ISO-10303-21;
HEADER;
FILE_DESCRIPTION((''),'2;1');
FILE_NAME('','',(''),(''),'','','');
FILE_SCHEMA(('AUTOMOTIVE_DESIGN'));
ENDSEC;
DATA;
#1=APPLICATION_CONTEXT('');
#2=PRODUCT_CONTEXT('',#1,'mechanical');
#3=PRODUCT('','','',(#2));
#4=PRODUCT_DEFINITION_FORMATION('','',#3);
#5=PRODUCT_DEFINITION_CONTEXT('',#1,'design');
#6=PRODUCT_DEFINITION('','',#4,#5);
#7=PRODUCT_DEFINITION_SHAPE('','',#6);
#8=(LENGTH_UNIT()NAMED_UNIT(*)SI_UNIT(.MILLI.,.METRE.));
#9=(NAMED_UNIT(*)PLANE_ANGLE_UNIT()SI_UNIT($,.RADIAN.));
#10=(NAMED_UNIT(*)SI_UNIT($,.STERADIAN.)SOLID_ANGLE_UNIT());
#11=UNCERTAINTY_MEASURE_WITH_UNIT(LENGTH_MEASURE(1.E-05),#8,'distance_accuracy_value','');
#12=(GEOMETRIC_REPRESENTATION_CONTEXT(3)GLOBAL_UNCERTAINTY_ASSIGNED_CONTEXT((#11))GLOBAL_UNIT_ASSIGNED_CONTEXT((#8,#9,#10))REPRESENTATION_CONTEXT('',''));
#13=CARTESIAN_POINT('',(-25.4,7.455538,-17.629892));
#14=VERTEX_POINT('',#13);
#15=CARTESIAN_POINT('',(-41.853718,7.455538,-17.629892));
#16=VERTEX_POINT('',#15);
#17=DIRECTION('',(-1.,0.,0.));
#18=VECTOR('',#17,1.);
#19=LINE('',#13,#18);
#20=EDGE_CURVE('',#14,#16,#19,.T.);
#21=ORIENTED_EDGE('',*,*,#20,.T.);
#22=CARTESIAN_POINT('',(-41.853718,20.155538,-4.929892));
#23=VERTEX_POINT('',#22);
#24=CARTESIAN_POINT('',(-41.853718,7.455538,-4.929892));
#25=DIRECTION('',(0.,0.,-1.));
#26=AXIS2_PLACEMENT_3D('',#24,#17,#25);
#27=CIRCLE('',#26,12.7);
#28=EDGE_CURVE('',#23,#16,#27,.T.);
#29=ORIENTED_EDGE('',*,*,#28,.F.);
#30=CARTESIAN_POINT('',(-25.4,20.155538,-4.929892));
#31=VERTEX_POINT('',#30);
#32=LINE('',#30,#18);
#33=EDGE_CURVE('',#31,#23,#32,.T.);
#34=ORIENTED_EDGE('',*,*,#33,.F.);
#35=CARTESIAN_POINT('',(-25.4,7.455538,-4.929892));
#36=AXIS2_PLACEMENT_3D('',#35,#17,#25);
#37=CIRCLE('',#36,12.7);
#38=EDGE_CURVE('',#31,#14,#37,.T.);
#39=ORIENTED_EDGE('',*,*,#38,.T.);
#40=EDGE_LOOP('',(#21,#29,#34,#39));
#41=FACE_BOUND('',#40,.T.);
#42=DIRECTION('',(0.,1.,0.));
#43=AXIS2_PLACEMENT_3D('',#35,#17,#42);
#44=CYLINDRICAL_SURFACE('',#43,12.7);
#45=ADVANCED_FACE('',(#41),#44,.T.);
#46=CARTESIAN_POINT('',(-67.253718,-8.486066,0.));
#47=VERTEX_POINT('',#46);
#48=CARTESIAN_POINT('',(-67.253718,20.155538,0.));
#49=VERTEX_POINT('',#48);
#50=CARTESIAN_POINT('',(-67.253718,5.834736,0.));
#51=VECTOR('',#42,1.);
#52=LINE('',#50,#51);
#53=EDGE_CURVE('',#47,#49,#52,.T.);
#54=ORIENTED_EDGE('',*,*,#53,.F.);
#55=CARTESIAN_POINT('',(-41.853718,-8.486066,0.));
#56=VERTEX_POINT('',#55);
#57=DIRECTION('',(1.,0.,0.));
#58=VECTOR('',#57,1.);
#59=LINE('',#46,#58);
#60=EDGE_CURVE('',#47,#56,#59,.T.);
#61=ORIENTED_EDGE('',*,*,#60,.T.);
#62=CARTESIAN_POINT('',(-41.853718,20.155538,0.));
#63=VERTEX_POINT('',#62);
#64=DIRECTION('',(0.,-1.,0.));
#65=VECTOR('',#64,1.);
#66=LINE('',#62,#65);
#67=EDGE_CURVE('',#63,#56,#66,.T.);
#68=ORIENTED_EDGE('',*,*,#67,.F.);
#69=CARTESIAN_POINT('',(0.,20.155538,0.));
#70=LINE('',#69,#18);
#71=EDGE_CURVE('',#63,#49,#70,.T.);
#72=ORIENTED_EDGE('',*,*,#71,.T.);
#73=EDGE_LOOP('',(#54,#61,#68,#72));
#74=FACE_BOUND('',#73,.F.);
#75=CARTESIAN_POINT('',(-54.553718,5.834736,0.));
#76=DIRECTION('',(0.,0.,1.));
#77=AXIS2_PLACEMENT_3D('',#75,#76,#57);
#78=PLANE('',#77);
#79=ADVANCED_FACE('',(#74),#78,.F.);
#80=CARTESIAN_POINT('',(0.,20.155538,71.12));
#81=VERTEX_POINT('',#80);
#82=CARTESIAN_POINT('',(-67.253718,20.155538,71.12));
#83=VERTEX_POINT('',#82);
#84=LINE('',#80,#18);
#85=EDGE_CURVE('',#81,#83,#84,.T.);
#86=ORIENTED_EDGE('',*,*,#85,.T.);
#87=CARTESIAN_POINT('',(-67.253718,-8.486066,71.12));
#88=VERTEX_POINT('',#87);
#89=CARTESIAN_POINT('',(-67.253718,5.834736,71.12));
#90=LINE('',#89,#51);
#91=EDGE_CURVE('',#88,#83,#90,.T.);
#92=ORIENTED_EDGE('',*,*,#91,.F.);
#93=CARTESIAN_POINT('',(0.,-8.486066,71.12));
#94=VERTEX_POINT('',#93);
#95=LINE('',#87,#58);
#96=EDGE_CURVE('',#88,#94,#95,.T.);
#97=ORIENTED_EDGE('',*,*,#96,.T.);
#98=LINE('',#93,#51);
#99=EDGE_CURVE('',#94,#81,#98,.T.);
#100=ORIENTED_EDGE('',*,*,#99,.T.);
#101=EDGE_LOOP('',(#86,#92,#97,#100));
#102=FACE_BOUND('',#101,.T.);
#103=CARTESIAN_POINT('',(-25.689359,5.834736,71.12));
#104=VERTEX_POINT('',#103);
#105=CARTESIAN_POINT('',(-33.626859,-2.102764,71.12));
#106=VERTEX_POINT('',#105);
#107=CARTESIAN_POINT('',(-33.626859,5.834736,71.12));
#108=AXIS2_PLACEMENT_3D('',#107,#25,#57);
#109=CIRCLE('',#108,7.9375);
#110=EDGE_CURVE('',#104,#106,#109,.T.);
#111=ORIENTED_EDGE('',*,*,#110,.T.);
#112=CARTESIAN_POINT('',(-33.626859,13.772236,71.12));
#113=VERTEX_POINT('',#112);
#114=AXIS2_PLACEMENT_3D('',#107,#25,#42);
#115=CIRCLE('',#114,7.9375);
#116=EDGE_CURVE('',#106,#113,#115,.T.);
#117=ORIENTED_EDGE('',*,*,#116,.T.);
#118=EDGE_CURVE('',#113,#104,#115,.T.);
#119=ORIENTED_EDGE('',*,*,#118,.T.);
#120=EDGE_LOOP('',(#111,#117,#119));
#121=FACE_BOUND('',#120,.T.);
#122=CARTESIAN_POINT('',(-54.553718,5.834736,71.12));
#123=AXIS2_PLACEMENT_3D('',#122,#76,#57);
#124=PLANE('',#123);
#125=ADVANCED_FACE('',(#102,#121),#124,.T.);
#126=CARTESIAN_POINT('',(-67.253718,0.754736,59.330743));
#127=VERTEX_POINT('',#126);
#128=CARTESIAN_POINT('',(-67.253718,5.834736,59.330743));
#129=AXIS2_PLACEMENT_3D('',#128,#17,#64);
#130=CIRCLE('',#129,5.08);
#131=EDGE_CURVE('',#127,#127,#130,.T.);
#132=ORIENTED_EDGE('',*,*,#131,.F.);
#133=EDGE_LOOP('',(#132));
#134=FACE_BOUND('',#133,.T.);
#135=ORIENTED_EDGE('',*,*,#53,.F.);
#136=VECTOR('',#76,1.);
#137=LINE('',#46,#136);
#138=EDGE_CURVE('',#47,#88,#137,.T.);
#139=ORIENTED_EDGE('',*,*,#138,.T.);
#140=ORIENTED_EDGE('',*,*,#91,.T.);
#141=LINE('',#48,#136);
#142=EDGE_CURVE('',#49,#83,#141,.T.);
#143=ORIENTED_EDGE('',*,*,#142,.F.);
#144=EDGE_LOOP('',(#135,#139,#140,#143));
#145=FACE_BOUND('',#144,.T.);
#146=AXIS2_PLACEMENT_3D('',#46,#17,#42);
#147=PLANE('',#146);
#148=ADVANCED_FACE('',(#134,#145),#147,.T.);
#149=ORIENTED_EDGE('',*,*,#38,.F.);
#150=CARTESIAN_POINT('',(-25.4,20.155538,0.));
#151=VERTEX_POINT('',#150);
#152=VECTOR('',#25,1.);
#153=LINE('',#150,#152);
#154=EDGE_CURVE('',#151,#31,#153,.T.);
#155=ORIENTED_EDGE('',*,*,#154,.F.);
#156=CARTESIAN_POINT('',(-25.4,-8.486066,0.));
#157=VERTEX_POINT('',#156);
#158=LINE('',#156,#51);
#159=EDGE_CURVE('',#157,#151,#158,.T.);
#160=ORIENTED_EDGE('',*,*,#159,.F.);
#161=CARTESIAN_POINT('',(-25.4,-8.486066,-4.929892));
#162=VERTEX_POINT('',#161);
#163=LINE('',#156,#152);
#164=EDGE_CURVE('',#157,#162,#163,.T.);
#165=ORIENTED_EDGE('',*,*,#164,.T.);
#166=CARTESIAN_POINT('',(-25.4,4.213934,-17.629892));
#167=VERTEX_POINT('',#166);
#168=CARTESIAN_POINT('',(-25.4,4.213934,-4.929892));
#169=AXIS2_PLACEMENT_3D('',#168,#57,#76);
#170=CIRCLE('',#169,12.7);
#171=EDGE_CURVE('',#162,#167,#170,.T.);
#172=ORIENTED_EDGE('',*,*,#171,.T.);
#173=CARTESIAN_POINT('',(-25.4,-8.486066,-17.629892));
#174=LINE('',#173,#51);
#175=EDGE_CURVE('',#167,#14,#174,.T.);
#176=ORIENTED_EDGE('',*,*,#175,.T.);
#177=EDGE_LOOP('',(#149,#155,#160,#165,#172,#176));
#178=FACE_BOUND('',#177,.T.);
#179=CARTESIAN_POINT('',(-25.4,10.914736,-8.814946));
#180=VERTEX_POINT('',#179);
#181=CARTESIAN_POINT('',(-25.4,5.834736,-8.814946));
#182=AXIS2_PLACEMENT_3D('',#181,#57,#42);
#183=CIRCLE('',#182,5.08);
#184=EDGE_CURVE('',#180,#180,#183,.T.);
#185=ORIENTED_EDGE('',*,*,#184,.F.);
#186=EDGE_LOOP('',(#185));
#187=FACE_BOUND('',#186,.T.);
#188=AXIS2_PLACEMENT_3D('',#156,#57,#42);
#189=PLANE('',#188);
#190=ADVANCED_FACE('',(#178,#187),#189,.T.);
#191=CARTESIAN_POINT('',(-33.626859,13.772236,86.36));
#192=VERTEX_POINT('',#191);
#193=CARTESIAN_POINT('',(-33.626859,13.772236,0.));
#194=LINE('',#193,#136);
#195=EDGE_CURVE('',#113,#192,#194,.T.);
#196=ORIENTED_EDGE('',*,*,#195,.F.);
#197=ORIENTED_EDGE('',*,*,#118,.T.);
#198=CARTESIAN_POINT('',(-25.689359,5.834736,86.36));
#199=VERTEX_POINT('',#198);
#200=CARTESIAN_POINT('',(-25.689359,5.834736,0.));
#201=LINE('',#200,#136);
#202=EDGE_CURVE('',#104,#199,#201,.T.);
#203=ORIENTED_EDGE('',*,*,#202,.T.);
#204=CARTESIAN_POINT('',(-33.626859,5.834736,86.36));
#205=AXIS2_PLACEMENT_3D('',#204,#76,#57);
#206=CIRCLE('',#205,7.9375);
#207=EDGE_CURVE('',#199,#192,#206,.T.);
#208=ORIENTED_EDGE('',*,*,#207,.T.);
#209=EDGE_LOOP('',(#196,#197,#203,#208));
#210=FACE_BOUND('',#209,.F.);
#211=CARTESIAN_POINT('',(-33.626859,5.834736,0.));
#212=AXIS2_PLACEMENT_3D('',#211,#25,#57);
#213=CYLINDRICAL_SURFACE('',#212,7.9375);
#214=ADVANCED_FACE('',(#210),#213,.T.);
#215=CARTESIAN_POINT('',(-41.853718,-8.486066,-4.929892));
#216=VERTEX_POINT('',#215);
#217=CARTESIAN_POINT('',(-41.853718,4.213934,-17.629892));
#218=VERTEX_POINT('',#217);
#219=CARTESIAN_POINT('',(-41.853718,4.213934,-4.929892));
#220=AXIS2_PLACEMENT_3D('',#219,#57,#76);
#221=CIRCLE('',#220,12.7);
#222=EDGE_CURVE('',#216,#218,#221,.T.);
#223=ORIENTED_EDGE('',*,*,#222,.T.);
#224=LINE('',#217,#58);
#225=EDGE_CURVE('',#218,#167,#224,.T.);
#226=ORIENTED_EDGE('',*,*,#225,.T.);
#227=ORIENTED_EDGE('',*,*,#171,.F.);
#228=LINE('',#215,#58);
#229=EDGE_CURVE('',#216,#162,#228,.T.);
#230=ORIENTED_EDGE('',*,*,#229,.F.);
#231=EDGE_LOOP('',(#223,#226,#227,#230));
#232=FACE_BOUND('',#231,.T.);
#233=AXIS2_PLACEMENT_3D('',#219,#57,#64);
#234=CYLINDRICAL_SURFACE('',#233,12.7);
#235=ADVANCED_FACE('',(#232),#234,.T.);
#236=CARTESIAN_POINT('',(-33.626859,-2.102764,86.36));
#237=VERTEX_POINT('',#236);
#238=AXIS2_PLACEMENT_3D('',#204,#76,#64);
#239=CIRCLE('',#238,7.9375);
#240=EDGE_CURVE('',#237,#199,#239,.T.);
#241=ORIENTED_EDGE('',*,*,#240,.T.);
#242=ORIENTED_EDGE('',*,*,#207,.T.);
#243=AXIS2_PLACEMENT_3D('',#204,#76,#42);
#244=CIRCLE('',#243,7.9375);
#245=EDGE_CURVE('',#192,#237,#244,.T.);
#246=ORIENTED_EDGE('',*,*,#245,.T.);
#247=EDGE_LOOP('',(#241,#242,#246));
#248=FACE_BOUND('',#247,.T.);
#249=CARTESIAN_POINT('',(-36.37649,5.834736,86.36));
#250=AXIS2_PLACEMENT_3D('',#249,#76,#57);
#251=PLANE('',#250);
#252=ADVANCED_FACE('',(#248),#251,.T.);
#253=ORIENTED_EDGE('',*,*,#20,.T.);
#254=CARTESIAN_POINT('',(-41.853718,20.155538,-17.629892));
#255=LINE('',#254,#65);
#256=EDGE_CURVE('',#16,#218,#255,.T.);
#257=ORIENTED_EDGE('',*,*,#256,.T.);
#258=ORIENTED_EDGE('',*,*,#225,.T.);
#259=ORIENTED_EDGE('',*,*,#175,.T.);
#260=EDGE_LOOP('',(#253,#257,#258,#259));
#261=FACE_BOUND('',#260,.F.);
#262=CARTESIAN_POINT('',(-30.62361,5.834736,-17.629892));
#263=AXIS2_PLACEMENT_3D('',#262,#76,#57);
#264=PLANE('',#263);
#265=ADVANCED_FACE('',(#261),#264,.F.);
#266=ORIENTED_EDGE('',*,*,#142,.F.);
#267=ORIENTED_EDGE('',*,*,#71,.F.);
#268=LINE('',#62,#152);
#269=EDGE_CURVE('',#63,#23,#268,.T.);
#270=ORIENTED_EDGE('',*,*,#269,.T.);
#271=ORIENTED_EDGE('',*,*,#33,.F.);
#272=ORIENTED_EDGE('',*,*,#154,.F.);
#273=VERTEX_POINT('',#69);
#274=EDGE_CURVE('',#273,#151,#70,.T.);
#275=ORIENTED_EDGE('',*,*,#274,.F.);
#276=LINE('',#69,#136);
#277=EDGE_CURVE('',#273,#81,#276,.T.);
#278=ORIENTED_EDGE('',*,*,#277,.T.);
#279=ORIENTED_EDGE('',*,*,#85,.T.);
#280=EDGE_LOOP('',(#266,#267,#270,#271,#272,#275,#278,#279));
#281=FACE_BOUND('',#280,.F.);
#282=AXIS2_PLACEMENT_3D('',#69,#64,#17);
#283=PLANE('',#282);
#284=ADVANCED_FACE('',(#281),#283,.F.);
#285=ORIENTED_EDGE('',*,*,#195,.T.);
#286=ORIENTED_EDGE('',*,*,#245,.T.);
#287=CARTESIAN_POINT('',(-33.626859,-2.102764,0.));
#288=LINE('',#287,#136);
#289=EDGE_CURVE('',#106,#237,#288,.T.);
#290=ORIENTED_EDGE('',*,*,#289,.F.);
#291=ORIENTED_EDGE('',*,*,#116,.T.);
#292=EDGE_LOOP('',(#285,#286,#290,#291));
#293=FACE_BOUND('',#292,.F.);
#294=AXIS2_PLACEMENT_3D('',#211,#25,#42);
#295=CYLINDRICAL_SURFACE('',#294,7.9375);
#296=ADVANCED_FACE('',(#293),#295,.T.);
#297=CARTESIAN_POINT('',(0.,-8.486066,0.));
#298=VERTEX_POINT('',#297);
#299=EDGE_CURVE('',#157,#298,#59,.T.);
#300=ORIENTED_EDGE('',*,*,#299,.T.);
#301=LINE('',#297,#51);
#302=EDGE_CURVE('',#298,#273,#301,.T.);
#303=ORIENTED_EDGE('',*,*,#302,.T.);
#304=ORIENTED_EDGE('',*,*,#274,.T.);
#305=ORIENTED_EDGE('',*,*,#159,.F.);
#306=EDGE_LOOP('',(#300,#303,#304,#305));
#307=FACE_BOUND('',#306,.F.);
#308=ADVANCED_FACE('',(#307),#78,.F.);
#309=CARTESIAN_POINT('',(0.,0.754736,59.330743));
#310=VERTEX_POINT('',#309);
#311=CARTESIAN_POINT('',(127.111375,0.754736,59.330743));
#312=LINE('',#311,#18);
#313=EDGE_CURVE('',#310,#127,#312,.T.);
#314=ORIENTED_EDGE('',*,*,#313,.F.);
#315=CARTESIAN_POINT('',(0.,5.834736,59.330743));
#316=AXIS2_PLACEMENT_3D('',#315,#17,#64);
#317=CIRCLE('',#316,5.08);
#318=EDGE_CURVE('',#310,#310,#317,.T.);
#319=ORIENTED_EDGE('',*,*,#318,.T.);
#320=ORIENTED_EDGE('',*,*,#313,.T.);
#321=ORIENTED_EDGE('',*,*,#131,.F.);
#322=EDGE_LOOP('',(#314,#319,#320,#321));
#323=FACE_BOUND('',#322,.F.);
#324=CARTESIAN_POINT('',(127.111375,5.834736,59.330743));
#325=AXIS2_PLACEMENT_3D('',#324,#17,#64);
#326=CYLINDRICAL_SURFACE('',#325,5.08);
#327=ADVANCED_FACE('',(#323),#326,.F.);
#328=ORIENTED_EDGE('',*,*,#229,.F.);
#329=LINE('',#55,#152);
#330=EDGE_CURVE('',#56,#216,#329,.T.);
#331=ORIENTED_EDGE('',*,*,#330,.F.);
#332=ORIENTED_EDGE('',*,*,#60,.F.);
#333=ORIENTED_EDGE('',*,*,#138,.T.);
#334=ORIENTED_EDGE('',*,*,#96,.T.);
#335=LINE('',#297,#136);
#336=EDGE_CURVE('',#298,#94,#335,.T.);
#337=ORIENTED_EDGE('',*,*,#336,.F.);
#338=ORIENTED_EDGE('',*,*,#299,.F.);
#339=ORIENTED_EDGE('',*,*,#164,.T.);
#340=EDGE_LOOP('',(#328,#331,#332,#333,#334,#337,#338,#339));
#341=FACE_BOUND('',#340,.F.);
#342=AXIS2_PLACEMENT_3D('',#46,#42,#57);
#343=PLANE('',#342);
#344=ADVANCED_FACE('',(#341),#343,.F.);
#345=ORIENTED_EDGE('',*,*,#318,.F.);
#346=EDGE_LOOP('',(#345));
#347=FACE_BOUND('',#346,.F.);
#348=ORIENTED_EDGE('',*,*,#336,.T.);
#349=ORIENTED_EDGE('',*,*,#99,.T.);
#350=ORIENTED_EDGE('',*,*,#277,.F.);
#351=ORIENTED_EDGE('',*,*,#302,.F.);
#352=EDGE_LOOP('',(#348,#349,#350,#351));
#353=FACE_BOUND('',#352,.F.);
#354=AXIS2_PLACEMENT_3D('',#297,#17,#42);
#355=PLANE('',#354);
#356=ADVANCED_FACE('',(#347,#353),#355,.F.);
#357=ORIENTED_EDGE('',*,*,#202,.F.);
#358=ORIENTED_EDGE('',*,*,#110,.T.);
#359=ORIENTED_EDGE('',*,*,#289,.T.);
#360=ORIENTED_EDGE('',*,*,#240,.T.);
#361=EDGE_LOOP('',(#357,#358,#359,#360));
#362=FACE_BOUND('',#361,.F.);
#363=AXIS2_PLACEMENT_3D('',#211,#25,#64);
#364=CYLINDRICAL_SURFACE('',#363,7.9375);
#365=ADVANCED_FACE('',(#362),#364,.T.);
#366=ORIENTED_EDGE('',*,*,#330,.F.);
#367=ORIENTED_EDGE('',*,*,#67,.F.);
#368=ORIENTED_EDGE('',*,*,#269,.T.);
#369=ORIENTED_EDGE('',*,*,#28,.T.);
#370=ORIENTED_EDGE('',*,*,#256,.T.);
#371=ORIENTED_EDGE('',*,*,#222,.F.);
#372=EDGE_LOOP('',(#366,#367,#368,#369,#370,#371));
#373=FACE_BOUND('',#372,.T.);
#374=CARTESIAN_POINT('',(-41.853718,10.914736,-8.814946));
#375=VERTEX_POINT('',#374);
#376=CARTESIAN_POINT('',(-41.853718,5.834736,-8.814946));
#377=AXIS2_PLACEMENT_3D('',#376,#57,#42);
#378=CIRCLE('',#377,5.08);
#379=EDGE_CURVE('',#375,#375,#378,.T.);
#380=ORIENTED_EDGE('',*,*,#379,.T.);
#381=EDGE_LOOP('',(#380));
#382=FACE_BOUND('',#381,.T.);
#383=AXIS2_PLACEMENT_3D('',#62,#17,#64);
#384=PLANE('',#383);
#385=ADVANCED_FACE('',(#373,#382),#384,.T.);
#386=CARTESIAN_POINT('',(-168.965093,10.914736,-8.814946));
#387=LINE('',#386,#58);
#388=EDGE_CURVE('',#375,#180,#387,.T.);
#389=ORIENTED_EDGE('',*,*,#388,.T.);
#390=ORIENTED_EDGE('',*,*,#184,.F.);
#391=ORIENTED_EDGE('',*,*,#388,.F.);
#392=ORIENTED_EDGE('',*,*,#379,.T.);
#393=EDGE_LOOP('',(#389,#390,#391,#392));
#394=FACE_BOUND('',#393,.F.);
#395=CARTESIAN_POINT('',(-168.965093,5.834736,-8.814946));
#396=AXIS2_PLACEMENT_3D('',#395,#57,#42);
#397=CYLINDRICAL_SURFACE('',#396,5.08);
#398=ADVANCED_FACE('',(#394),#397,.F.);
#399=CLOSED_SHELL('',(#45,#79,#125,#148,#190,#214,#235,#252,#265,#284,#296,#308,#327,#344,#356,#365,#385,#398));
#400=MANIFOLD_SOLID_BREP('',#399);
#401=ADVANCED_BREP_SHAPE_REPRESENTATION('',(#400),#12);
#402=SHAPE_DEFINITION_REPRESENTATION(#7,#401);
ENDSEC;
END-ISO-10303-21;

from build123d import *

# Parameters (mm, degrees)
F0_W     = 25.4
F0_H     = 28.6416042886
F0_H_2   = 7.5187312844
F0_H_3   = 21.1228730042
F1_DEPTH = 71.12
F2_DEPTH = 86.36
F3_DEPTH = 17.629891634
F4_R     = 12.7
F6_D     = 10.16
F8_D     = 10.16


with BuildPart() as f1:
    # F0 (on Top) → F1 (new body)
    with BuildSketch(Plane.XY):
        with Locations((-54.5537182136, 5.834735956)):
            Rectangle(F0_W, F0_H)
        with BuildLine():
            Line((-33.6268591068, 20.1555381003), (-41.8537182136, 20.1555381003))
            Line((-41.8537182136, 20.1555381003), (-41.8537182136, -8.4860661883))
            Line((-41.8537182136, -8.4860661883), (-33.6268591068, -8.4860661883))
            Line((-33.6268591068, -8.4860661883), (-33.6268591068, -2.102764044))
            ThreePointArc((-33.6268591068, -2.102764044), (-41.5643591068, 5.834735956), (-33.6268591068, 13.772235956))
            Line((-33.6268591068, 13.772235956), (-33.6268591068, 20.1555381003))
        make_face()
        with BuildLine():
            Line((-25.4, 20.1555381003), (-33.6268591068, 20.1555381003))
            Line((-33.6268591068, 20.1555381003), (-33.6268591068, 13.772235956))
            ThreePointArc((-33.6268591068, 13.772235956), (-28.0141990311, 11.4473960317), (-25.6893591068, 5.834735956))
            ThreePointArc((-25.6893591068, 5.834735956), (-28.0141990311, 0.2220758803), (-33.6268591068, -2.102764044))
            Line((-33.6268591068, -2.102764044), (-33.6268591068, -8.4860661883))
            Line((-33.6268591068, -8.4860661883), (-25.4, -8.4860661883))
            Line((-25.4, -8.4860661883), (-25.4, 12.6368068159))
            Line((-25.4, 12.6368068159), (-25.4, 20.1555381003))
        make_face()
        with Locations((-12.7, 16.3961724581)):
            Rectangle(F0_W, F0_H_2)
        with BuildLine():
            Line((-33.6268591068, -2.102764044), (-33.6268591068, 13.772235956))
            ThreePointArc((-33.6268591068, 13.772235956), (-41.5643591068, 5.834735956), (-33.6268591068, -2.102764044))
        make_face()
        with Locations((-12.7, 2.0753703138)):
            Rectangle(F0_W, F0_H_3)
    extrude(amount=F1_DEPTH)

    # F0 (on Top) → F2 (join)
    with BuildSketch(Plane.XY):
        with BuildLine():
            Line((-33.6268591068, -2.102764044), (-33.6268591068, 13.772235956))
            ThreePointArc((-33.6268591068, 13.772235956), (-41.5643591068, 5.834735956), (-33.6268591068, -2.102764044))
        make_face()
        with BuildLine():
            ThreePointArc((-25.6893591068, 5.834735956), (-28.0141990311, 11.4473960317), (-33.6268591068, 13.772235956))
            Line((-33.6268591068, 13.772235956), (-33.6268591068, -2.102764044))
            ThreePointArc((-33.6268591068, -2.102764044), (-28.0141990311, 0.2220758803), (-25.6893591068, 5.834735956))
        make_face()
    extrude(amount=F2_DEPTH)

    # F0 (on Top) → F3 (join)
    with BuildSketch(Plane.XY):
        with BuildLine():
            ThreePointArc((-25.6893591068, 5.834735956), (-28.0141990311, 11.4473960317), (-33.6268591068, 13.772235956))
            Line((-33.6268591068, 13.772235956), (-33.6268591068, -2.102764044))
            ThreePointArc((-33.6268591068, -2.102764044), (-28.0141990311, 0.2220758803), (-25.6893591068, 5.834735956))
        make_face()
        with BuildLine():
            Line((-25.4, 20.1555381003), (-33.6268591068, 20.1555381003))
            Line((-33.6268591068, 20.1555381003), (-33.6268591068, 13.772235956))
            ThreePointArc((-33.6268591068, 13.772235956), (-28.0141990311, 11.4473960317), (-25.6893591068, 5.834735956))
            ThreePointArc((-25.6893591068, 5.834735956), (-28.0141990311, 0.2220758803), (-33.6268591068, -2.102764044))
            Line((-33.6268591068, -2.102764044), (-33.6268591068, -8.4860661883))
            Line((-33.6268591068, -8.4860661883), (-25.4, -8.4860661883))
            Line((-25.4, -8.4860661883), (-25.4, 12.6368068159))
            Line((-25.4, 12.6368068159), (-25.4, 20.1555381003))
        make_face()
        with BuildLine():
            Line((-33.6268591068, 20.1555381003), (-41.8537182136, 20.1555381003))
            Line((-41.8537182136, 20.1555381003), (-41.8537182136, -8.4860661883))
            Line((-41.8537182136, -8.4860661883), (-33.6268591068, -8.4860661883))
            Line((-33.6268591068, -8.4860661883), (-33.6268591068, -2.102764044))
            ThreePointArc((-33.6268591068, -2.102764044), (-41.5643591068, 5.834735956), (-33.6268591068, 13.772235956))
            Line((-33.6268591068, 13.772235956), (-33.6268591068, 20.1555381003))
        make_face()
        with BuildLine():
            Line((-33.6268591068, -2.102764044), (-33.6268591068, 13.772235956))
            ThreePointArc((-33.6268591068, 13.772235956), (-41.5643591068, 5.834735956), (-33.6268591068, -2.102764044))
        make_face()
    extrude(amount=-F3_DEPTH)

    # F4
    f4_edges = [f1.edges().sort_by_distance(p)[0] for p in [
        (-33.626859, -8.486066, -17.629892),
        (-33.626859, 20.155538, -17.629892),
    ]]
    fillet(f4_edges, radius=F4_R)

    # F6 (through all)
    with Locations(Plane(origin=(-41.8537182136, 0, 0), x_dir=(0, -1, 0), z_dir=(-1, 0, 0))):
        with Locations((-5.834735956, -8.814945817)):
            Hole(F6_D / 2)

    # F8 (through all)
    with Locations(Plane.YZ):
        with Locations((5.834735956, 59.3307428062)):
            Hole(F8_D / 2)


solid = f1.part
